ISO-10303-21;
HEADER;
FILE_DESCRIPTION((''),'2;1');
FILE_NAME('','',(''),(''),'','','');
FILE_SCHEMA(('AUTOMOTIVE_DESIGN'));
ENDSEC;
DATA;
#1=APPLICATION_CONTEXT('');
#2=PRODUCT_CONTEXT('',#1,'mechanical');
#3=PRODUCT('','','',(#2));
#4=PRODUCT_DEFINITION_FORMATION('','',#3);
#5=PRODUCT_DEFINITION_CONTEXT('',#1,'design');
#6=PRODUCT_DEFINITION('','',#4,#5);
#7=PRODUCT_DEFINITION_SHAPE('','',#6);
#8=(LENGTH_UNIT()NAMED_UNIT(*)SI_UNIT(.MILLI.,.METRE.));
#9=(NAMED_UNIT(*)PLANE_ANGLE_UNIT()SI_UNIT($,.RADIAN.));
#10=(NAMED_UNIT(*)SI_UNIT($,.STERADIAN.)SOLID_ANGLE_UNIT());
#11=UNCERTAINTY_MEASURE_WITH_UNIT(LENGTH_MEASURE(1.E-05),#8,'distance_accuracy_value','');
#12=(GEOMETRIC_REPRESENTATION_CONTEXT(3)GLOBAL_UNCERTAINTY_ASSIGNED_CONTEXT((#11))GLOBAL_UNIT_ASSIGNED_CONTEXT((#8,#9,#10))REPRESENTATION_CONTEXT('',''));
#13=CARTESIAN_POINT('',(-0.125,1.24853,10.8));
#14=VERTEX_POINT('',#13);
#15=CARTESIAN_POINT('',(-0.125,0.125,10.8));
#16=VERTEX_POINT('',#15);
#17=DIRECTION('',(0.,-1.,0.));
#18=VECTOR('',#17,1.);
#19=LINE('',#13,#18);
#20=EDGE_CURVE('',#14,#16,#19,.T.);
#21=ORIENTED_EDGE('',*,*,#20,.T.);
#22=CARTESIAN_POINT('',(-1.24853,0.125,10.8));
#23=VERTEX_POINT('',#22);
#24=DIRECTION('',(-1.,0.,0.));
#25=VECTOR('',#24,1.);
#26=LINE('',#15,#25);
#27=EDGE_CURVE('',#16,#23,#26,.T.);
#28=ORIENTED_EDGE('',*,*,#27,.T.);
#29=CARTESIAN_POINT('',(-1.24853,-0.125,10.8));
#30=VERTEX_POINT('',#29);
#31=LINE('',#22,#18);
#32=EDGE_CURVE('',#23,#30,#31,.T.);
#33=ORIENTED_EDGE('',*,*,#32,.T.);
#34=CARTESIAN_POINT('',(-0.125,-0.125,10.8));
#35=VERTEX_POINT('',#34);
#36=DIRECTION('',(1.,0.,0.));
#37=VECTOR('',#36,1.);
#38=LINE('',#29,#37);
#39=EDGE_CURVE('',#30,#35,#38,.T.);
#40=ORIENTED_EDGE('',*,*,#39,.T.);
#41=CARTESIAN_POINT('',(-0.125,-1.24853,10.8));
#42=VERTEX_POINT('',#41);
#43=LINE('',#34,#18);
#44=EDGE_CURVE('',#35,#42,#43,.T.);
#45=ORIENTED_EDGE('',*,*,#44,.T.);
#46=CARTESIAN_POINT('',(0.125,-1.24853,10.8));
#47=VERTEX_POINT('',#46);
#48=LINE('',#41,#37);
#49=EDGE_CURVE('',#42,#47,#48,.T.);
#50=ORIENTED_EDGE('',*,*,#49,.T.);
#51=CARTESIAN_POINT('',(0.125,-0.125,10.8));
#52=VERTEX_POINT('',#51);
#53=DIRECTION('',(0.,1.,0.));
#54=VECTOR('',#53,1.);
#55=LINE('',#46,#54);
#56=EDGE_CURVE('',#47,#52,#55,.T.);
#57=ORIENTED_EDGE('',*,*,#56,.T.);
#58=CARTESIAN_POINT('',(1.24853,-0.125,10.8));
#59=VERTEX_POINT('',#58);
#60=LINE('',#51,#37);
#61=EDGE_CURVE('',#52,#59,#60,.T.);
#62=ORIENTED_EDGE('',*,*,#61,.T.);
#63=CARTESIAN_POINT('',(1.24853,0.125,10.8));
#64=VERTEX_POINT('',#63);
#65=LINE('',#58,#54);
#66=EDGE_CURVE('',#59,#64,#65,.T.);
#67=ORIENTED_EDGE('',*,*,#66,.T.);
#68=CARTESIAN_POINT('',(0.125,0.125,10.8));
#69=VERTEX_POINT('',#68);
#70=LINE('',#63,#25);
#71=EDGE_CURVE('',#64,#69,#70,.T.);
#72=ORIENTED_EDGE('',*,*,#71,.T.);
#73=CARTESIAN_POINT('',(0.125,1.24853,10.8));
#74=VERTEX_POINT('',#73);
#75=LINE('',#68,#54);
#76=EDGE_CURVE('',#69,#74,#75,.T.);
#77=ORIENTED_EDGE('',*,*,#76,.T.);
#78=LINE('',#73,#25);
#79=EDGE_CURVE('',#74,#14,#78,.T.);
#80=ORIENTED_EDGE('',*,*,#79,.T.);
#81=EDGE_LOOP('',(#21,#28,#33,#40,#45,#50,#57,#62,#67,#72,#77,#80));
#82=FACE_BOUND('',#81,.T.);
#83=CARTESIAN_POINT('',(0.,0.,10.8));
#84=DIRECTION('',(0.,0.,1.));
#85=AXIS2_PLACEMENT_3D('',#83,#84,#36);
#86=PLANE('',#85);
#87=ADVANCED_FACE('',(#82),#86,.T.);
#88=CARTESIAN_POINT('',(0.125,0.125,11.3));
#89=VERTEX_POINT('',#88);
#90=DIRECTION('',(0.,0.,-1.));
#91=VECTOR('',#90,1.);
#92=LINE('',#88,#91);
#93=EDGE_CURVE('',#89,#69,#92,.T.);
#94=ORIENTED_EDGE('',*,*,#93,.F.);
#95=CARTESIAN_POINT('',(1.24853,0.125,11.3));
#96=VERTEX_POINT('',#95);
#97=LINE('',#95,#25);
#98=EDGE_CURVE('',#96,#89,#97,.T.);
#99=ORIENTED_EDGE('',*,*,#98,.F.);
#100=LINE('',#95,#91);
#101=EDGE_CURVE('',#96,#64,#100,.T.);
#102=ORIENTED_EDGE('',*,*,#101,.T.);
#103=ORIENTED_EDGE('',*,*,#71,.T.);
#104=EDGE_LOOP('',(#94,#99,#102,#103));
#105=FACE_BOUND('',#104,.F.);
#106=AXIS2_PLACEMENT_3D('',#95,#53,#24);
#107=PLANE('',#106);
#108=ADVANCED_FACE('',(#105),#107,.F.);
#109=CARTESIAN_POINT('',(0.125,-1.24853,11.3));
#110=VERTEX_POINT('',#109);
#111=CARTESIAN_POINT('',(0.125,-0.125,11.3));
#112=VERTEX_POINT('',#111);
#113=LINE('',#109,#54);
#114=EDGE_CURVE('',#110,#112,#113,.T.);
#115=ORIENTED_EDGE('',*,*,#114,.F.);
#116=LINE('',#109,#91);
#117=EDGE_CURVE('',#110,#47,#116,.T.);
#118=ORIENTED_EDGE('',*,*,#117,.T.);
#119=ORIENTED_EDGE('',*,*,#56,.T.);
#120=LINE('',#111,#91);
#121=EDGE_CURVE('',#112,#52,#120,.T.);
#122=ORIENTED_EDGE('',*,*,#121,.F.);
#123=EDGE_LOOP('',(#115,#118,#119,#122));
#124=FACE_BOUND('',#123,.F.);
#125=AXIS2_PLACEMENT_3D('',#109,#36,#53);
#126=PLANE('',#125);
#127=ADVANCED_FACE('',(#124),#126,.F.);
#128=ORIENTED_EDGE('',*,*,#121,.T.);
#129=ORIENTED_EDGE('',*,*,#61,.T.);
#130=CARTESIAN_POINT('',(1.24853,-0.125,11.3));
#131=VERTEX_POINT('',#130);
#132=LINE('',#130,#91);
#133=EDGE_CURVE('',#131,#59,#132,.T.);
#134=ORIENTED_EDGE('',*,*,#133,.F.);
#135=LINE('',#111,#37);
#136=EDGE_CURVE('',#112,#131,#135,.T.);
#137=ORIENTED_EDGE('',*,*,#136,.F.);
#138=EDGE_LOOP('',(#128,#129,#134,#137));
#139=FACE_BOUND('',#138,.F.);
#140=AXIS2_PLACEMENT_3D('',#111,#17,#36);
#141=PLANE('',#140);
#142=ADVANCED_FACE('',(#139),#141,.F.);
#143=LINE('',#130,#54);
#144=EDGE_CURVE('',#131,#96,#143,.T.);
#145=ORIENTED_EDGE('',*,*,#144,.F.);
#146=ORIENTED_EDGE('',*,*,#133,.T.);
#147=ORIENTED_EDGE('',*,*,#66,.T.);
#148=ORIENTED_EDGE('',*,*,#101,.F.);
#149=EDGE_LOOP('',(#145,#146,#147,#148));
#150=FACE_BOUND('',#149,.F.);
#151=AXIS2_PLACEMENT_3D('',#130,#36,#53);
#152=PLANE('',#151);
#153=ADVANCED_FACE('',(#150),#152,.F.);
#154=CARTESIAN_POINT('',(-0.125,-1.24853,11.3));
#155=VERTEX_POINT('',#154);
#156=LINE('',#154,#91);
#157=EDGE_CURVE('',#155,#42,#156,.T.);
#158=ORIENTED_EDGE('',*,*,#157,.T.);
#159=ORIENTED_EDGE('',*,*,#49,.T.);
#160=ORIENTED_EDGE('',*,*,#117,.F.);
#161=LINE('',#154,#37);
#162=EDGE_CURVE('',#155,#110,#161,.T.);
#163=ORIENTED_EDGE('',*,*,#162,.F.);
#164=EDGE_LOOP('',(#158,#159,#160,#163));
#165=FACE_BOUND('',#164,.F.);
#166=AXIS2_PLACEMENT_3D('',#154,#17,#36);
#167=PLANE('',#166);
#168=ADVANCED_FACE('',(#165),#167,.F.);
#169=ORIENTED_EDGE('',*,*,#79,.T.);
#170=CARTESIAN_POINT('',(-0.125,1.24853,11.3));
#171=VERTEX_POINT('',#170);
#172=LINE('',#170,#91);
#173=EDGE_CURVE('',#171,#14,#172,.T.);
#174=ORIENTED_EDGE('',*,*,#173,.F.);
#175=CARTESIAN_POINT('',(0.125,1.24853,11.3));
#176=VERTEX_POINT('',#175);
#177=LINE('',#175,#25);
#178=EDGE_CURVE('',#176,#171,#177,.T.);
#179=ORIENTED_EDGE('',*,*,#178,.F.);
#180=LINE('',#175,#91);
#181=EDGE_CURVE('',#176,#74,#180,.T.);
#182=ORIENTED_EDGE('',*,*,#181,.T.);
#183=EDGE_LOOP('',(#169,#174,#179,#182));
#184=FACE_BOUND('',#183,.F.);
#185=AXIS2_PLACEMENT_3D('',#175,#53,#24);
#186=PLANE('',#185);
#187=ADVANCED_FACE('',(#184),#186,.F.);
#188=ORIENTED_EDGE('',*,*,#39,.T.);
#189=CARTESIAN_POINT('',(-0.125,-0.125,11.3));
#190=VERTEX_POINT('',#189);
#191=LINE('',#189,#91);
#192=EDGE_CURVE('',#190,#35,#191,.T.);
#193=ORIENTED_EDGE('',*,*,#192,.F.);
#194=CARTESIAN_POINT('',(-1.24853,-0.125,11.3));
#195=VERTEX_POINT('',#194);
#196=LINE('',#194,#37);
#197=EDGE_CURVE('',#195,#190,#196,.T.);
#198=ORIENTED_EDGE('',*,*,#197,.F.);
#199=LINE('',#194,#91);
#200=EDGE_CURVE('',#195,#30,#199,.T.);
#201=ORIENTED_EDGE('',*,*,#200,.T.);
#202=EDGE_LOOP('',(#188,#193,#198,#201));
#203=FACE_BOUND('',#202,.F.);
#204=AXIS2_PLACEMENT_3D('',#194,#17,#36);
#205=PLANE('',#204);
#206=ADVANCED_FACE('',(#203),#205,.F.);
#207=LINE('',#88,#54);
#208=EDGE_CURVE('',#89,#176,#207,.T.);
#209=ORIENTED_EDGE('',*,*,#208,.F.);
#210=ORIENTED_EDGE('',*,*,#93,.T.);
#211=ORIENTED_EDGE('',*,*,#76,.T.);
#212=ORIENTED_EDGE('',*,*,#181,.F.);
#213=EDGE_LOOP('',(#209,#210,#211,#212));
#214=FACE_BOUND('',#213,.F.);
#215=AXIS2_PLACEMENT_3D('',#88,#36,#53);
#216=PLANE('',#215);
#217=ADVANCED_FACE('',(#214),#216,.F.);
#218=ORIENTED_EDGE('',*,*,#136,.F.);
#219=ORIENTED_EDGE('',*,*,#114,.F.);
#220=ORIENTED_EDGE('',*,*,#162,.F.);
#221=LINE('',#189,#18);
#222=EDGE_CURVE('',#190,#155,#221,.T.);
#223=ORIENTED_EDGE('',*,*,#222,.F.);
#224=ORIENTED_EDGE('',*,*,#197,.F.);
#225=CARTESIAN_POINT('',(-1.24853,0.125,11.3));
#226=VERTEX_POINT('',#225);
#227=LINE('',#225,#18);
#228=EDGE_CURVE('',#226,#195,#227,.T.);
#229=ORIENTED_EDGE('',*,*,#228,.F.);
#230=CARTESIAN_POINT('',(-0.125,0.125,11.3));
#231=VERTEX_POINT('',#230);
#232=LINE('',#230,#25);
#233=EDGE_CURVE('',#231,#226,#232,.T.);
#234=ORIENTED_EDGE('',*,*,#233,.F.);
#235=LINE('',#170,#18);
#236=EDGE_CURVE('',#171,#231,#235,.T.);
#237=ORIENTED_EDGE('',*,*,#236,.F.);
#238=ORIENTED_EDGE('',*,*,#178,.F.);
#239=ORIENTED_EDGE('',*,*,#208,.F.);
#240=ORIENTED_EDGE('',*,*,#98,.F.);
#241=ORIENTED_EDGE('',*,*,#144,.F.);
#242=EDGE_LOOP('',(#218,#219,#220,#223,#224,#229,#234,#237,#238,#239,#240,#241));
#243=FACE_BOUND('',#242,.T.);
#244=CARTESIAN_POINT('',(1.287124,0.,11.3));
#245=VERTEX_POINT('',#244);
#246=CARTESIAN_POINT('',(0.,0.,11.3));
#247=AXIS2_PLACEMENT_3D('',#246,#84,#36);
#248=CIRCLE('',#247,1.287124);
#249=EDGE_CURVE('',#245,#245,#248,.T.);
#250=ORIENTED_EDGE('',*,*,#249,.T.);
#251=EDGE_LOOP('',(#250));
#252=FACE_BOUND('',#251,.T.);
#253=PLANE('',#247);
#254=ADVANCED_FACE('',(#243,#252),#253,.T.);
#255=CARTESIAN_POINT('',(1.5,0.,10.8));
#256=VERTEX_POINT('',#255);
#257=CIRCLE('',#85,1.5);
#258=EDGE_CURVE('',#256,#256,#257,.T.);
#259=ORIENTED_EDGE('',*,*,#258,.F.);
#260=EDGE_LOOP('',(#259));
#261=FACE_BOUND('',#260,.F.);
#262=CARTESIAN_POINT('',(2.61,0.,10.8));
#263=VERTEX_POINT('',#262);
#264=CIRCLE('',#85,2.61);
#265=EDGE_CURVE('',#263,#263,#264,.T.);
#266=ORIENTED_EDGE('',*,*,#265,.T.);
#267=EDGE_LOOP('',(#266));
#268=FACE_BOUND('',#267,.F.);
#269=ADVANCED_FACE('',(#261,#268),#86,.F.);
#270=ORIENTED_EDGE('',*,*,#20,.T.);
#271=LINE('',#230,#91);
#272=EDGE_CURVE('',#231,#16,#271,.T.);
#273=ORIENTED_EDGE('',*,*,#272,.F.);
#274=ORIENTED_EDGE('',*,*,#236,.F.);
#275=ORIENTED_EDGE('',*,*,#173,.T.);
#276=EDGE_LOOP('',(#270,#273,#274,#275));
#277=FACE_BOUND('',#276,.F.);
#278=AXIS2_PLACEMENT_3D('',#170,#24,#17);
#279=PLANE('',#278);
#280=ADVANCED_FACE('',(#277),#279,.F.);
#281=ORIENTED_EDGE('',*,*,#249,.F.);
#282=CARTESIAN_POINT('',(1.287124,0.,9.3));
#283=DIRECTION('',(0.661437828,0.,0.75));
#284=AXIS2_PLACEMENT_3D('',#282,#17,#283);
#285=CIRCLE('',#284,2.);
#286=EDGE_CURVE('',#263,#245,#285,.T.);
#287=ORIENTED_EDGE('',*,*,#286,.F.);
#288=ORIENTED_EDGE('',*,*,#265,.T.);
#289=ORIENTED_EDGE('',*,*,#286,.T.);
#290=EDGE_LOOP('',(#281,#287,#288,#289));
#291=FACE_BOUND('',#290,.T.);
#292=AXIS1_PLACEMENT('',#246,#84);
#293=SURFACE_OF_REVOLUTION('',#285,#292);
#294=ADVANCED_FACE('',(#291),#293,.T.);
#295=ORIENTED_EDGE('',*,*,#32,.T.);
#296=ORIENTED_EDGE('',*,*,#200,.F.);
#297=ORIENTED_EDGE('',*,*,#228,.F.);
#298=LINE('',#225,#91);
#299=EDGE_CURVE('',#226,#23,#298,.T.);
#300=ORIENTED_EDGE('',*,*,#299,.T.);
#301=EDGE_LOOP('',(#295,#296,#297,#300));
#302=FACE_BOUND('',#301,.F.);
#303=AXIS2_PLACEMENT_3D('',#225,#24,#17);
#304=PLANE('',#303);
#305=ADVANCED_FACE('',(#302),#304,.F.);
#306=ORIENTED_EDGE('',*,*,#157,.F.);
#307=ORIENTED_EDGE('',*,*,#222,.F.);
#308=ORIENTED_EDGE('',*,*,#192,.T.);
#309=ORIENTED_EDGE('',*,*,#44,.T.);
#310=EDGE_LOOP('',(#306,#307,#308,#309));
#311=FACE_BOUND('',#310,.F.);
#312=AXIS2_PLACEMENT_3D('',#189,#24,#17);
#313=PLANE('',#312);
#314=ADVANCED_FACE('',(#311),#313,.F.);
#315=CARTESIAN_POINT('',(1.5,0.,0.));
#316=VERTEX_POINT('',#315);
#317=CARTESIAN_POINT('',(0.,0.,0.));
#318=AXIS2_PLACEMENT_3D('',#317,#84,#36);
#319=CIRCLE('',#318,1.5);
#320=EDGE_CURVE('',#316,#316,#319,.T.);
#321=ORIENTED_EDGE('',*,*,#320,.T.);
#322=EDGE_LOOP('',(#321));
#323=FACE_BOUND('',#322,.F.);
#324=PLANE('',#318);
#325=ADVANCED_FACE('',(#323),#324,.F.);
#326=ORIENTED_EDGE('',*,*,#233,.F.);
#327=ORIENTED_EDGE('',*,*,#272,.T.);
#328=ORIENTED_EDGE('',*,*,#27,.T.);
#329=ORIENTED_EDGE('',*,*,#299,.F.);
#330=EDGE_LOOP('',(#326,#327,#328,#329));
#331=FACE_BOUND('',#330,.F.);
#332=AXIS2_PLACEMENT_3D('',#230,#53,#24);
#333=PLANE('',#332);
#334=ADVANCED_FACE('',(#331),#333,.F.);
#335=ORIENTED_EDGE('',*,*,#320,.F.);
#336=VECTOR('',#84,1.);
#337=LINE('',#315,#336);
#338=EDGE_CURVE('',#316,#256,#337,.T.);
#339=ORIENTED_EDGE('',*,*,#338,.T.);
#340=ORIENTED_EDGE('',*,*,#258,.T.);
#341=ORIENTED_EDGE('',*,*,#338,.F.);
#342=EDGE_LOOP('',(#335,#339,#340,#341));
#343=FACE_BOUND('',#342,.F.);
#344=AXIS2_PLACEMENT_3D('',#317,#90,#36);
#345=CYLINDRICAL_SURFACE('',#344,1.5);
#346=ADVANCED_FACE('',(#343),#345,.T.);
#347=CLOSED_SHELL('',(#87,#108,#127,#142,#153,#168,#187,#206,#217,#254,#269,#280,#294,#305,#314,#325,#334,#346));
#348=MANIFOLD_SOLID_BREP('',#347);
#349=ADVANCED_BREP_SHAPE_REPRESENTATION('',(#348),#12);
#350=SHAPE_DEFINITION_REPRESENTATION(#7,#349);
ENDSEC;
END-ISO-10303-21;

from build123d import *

# Parameters (mm, degrees)
F0_R     = 1.5
F1_DEPTH = 11.3
F2_R     = 2.61
F2_R_2   = 1.5
F3_DEPTH = 0.5
F5_DEPTH = 0.5


# Not quite as in the source:
# - a fillet or chamfer that OpenCascade refuses, or shapes differently, is made with other operations: its cross-section is extruded or revolved along the edge and cut away or added


with BuildPart() as f1:
    # F0 (on Top) → F1 (new body)
    with BuildSketch(Plane.XY):
        Circle(F0_R)
    extrude(amount=F1_DEPTH)

    # F2 (on face) → F3 (join)
    with BuildSketch(Plane.XY.offset(11.3)):
        Circle(F2_R)
        Circle(F2_R_2, mode=Mode.SUBTRACT)
    extrude(amount=-F3_DEPTH)

    # F4: fillet of radius 2 on 1 edges, made by hand

    # F4_s1 → F4_t2 (revolve, cut)
    with BuildSketch(Plane.XZ):
        with BuildLine():
            ThreePointArc((2.61, 10.8), (1.9942311257, 11.1708286934), (1.2871243445, 11.3))
            Line((1.2871243445, 11.3), (2.61, 11.3))
            Line((2.61, 11.3), (2.61, 10.8))
        make_face()
    revolve(axis=Axis((0, 0, 11.3), (0, 0, 1)), mode=Mode.SUBTRACT)

    # F2 (on face) → F5 (cut)
    with BuildSketch(Plane.XY.offset(11.3)):
        Polygon((-1.2485300168, 0.125), (-1.2485300168, -0.125), (-0.125, -0.125), (-0.125, -1.2485300168), (0.125, -1.2485300168), (0.125, -0.125), (1.2485300168, -0.125), (1.2485300168, 0.125), (0.125, 0.125), (0.125, 1.2485300168), (-0.125, 1.2485300168), (-0.125, 0.125), align=None)
    extrude(amount=-F5_DEPTH, mode=Mode.SUBTRACT)


solid = f1.part
